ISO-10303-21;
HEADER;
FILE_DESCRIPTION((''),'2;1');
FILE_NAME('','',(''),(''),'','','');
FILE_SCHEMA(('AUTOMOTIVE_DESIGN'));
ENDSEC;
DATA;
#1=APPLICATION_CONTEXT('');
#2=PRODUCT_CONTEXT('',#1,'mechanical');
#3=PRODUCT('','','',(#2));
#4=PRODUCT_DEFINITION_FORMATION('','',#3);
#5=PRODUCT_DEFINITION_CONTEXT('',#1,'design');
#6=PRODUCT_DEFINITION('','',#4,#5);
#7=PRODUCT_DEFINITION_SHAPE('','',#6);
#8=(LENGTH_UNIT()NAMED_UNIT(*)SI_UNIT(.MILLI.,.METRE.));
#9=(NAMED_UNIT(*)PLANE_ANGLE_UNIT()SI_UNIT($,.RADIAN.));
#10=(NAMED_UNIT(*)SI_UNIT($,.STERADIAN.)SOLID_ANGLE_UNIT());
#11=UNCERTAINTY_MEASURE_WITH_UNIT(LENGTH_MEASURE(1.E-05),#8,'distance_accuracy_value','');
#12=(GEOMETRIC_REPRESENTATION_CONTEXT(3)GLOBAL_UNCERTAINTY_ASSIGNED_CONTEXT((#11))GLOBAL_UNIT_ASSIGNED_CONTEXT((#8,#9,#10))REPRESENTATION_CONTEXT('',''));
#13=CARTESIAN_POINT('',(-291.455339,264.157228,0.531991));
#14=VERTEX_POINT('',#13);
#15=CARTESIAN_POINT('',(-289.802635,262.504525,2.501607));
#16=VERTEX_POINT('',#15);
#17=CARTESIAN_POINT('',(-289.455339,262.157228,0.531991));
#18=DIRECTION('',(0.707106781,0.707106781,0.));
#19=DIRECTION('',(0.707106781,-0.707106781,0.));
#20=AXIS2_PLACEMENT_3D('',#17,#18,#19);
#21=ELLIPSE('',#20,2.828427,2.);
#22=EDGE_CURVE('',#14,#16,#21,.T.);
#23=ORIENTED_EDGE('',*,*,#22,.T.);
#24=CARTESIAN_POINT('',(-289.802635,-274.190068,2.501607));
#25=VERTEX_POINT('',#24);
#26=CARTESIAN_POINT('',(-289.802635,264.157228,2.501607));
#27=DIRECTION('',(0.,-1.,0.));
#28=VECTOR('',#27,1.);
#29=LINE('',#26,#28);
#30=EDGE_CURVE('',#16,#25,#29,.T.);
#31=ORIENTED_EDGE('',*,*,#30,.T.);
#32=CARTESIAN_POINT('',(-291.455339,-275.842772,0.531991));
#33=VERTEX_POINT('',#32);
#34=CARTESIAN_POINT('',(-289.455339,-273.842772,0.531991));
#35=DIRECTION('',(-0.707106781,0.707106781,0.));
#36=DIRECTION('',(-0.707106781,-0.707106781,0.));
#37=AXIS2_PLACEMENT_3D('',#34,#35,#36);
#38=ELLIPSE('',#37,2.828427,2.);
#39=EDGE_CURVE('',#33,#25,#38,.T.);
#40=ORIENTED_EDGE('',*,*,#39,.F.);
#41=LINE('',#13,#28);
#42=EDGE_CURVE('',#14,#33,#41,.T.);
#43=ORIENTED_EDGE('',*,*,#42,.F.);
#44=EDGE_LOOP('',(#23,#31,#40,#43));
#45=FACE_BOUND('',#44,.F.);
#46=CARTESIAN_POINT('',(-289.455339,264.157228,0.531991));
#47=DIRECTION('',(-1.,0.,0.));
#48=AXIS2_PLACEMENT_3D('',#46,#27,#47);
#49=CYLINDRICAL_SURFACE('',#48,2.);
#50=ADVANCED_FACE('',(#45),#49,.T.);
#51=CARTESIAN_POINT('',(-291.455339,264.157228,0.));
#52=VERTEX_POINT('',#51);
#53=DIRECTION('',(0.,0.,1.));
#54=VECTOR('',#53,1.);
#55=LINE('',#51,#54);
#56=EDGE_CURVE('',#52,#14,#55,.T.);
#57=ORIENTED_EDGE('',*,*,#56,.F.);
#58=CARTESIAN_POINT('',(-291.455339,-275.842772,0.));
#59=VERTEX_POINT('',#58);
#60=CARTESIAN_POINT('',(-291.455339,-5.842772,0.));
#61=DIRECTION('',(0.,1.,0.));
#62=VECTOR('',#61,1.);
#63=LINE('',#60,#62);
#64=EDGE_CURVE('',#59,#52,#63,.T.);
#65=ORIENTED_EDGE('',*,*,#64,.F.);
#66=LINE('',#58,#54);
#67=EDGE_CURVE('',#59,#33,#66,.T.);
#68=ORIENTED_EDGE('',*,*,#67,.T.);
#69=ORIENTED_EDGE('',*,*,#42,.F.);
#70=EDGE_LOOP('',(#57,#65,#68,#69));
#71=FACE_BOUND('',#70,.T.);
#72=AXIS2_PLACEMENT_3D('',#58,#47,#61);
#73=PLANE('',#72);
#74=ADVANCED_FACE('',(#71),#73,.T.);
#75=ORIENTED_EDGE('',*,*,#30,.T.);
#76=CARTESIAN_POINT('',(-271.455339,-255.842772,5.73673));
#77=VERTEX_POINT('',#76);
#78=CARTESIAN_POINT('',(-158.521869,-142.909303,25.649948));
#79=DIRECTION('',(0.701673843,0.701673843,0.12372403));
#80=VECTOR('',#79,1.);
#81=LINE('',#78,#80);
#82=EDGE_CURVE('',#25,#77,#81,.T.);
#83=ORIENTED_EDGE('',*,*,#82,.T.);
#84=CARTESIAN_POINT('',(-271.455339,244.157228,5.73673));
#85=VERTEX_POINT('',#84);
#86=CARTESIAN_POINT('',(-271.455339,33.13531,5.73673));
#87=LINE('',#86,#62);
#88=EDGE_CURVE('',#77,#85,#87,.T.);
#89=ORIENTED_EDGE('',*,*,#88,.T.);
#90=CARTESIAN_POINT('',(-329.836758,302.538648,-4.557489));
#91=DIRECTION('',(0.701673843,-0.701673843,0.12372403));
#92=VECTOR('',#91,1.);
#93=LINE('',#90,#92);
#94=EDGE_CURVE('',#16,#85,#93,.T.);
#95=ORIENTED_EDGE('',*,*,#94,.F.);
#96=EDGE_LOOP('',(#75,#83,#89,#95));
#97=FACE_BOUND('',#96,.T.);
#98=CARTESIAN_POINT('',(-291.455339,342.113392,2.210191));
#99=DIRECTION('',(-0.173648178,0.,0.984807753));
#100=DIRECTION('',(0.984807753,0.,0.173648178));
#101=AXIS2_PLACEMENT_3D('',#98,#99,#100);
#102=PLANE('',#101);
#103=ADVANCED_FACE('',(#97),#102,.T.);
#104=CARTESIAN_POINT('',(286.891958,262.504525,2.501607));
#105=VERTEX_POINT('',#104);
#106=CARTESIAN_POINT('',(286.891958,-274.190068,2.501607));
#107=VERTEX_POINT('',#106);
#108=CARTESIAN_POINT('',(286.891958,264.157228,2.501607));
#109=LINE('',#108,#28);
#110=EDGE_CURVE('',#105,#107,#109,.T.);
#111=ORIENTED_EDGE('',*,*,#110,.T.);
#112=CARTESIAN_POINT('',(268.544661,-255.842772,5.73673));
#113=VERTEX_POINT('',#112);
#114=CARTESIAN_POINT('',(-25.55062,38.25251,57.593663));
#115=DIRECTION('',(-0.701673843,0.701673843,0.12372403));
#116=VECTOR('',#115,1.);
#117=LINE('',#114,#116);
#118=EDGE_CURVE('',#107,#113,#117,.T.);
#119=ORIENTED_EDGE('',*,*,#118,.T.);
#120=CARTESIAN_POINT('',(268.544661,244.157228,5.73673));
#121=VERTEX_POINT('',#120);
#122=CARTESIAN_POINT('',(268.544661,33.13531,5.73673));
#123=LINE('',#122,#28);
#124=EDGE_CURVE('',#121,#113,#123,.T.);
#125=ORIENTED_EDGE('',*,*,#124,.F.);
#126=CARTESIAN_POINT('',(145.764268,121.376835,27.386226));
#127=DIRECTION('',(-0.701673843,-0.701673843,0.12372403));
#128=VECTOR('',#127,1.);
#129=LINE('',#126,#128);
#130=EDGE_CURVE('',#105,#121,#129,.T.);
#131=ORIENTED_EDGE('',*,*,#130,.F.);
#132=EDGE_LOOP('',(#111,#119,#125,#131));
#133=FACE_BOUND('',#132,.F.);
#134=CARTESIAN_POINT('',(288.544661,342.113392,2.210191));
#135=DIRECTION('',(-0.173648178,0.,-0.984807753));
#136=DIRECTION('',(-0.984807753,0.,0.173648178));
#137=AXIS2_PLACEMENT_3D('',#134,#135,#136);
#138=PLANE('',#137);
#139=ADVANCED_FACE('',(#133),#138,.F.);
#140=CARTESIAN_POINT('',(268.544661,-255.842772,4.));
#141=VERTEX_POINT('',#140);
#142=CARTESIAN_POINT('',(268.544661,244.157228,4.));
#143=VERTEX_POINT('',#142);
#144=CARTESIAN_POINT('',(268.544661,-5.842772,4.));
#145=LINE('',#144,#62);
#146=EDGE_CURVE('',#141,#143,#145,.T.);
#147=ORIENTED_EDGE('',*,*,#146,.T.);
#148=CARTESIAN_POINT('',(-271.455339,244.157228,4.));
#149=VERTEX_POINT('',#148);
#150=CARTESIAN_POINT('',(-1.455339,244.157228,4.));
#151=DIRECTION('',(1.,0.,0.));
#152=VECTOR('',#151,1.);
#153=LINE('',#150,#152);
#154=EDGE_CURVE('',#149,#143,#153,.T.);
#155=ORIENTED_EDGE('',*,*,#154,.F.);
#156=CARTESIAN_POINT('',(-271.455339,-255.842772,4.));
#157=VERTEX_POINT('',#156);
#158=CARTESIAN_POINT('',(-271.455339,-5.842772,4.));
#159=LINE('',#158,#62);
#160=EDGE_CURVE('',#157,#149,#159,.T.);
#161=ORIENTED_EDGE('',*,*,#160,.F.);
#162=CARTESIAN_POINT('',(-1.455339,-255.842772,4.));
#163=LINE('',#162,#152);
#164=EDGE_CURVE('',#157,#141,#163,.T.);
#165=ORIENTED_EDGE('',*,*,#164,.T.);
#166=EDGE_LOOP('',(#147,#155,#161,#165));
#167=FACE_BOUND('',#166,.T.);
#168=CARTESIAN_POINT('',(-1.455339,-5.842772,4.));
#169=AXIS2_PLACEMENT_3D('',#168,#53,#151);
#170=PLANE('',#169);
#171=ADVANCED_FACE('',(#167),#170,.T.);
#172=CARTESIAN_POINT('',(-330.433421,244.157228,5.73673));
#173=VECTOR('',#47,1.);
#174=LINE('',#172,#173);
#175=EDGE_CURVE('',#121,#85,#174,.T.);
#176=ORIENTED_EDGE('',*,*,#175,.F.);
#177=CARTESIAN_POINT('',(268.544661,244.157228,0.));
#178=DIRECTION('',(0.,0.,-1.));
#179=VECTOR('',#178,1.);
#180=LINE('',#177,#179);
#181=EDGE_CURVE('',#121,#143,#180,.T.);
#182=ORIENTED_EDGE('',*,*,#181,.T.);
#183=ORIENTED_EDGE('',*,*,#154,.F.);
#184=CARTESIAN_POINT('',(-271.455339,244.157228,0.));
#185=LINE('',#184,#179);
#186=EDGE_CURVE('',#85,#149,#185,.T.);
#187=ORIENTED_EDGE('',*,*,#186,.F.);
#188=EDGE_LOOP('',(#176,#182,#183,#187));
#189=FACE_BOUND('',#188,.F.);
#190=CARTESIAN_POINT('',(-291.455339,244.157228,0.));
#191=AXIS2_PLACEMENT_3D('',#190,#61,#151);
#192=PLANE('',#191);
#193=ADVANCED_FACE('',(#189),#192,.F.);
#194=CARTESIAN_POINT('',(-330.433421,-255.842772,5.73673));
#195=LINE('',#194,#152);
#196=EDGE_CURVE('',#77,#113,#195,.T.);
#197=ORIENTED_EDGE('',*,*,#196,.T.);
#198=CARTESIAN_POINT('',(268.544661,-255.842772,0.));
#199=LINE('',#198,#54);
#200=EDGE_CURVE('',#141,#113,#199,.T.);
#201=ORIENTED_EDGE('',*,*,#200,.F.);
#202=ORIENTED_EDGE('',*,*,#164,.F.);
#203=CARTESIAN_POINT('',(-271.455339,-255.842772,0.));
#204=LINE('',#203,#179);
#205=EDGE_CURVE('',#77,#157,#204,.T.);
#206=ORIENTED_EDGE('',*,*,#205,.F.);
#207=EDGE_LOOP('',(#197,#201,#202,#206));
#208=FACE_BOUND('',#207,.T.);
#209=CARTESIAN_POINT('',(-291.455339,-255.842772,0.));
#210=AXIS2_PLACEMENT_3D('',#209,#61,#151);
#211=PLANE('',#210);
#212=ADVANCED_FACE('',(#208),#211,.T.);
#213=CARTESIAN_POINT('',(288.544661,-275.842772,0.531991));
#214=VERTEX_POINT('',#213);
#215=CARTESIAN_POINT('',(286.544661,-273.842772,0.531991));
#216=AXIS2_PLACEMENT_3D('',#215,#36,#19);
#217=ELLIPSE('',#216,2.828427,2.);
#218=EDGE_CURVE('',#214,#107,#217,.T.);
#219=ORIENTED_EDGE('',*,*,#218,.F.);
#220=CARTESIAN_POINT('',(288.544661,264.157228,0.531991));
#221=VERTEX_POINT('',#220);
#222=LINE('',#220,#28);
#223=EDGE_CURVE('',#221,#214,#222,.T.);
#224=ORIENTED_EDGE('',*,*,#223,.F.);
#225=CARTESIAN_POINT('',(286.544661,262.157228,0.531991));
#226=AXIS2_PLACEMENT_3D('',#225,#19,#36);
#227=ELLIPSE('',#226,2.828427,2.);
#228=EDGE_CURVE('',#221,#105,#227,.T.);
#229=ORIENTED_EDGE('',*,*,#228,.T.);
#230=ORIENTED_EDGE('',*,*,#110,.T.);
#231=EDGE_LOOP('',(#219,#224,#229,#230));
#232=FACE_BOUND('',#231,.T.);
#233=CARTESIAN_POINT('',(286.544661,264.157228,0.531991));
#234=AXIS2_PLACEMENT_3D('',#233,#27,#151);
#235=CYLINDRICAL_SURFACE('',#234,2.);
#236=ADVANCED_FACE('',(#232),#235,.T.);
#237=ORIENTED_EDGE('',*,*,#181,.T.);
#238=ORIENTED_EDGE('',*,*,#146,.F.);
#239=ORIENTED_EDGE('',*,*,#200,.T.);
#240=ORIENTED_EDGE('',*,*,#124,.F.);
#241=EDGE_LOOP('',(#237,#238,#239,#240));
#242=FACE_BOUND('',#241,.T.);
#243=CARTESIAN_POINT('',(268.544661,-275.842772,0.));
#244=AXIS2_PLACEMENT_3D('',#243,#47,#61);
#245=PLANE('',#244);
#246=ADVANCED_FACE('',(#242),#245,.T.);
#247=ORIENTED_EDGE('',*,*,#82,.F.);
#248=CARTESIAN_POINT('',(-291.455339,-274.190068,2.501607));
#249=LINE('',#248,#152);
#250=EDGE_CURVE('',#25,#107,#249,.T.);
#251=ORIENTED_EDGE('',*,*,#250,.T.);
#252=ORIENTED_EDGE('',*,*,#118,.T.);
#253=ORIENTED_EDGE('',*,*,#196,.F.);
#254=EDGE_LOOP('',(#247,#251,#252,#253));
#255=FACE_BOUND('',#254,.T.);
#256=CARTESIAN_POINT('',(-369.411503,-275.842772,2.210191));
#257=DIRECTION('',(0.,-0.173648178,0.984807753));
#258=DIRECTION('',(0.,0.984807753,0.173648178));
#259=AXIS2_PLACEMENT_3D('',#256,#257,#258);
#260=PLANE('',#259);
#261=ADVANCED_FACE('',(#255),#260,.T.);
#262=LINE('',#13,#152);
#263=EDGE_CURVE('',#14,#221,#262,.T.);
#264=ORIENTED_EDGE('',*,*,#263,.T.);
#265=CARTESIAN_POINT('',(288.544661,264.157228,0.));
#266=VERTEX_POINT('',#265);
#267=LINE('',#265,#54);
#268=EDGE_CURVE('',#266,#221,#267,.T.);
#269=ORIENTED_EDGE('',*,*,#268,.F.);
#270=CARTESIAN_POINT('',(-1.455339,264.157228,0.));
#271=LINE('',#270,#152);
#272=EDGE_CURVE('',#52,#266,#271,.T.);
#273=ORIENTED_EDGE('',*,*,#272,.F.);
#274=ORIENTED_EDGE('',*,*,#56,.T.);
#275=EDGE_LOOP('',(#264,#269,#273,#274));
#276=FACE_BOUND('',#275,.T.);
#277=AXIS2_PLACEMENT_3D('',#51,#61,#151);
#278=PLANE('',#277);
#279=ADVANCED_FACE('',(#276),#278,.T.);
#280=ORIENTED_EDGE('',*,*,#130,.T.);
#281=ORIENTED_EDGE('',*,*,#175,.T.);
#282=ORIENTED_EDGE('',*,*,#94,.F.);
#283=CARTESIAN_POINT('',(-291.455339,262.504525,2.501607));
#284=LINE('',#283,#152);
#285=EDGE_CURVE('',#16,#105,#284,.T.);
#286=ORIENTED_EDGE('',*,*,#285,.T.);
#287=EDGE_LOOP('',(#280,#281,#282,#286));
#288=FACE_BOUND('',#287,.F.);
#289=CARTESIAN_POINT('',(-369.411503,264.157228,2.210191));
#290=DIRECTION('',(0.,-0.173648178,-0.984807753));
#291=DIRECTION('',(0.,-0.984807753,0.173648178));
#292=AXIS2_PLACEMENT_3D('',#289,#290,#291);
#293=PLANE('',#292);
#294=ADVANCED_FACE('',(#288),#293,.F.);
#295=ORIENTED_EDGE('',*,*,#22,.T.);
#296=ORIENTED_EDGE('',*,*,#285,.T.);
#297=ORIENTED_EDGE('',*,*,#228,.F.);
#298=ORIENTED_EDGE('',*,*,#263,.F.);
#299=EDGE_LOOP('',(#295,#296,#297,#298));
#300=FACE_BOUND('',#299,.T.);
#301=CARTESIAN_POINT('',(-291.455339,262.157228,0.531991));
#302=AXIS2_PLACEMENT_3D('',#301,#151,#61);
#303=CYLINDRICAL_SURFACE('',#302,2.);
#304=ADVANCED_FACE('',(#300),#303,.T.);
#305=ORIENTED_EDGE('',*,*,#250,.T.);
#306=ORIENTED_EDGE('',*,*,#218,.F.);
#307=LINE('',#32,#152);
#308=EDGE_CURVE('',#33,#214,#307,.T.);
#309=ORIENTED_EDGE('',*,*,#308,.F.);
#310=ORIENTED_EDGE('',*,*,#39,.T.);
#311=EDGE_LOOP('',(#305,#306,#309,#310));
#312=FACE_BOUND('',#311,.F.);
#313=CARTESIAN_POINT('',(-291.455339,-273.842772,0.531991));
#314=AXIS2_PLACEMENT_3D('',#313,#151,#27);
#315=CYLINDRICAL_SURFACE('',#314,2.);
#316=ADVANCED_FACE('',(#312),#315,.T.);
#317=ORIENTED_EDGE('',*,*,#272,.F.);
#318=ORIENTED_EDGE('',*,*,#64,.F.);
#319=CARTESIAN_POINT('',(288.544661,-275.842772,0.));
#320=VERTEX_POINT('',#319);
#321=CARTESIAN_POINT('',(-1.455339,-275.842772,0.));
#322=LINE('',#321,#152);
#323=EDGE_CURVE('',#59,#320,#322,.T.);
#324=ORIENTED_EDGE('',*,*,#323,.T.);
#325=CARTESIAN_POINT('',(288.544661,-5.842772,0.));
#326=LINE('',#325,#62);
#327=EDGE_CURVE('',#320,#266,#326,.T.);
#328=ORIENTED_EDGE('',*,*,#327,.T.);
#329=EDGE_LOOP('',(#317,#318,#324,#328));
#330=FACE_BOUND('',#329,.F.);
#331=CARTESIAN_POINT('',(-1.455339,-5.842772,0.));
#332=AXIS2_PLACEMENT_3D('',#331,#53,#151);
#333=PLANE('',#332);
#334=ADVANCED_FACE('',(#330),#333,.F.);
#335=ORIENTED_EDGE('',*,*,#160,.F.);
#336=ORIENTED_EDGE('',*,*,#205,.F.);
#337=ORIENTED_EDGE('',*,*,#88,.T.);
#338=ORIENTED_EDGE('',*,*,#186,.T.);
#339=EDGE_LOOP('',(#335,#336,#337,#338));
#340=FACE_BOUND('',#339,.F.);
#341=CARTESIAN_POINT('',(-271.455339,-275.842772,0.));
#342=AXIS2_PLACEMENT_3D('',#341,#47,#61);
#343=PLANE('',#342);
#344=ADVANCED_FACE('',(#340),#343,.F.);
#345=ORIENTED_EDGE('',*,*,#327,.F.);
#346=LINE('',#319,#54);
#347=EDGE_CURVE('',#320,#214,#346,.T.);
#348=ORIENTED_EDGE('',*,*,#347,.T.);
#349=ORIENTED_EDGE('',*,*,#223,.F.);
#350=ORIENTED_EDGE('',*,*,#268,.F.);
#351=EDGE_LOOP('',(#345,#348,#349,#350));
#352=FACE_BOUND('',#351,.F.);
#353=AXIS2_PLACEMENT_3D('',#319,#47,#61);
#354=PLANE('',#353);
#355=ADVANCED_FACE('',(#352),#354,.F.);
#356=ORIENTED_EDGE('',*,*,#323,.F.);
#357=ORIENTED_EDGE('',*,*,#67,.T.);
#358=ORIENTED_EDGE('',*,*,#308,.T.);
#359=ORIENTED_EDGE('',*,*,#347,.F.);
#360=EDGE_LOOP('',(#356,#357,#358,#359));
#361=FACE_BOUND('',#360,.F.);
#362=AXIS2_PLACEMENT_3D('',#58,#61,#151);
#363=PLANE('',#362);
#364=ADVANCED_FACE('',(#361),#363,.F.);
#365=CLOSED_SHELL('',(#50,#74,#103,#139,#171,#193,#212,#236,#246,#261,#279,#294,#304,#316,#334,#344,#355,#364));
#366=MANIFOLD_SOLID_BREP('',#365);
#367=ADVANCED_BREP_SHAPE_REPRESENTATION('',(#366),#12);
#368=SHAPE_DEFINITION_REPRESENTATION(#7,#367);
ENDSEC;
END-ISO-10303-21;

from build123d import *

# Parameters (mm, degrees)
F0_W        = 580
F0_H        = 540
F1_DEPTH    = 7.5
F2_T        = -20
F3_T1_DEPTH = 695.9123277853
F3_T3_DEPTH = 735.9123277853
F4_R        = 2
F5_W        = 540
F5_H        = 500
F6_DEPTH    = 4


# Not quite as in the source:
# - a fillet or chamfer that OpenCascade refuses, or shapes differently, is made with other operations: its cross-section is extruded or revolved along the edge and cut away or added


with BuildPart() as f1:
    # F0 (on Top) → F1 (new body)
    with BuildSketch(Plane.XY):
        with Locations((-1.4553386718, -5.8427717585)):
            Rectangle(F0_W, F0_H)
    extrude(amount=F1_DEPTH)

    # F2
    f2_openings = [f1.faces().sort_by_distance(p)[0] for p in [
        (-1.455339, -5.842772, 7.5),
        (-1.455339, -5.842772, 0),
    ]]
    offset(amount=F2_T, openings=f2_openings)

    # F3: chamfer of 30 x 5.2898094213 on 4 edges, made by hand

    # F3_s2 → F3_t1 (cut)
    with BuildSketch(Plane.XZ.offset(-342.1133921341)):
        Polygon((-291.4553386718, 2.2101905787), (-261.4553386718, 7.5), (-291.4553386718, 7.5), align=None)
        Polygon((288.5446613282, 2.2101905787), (258.5446613282, 7.5), (288.5446613282, 7.5), align=None)
    extrude(amount=F3_T1_DEPTH, mode=Mode.SUBTRACT)

    # F3_s4 → F3_t3 (cut)
    with BuildSketch(Plane.YZ.offset(-369.4115025644)):
        Polygon((-275.8427717585, 2.2101905787), (-245.8427717585, 7.5), (-275.8427717585, 7.5), align=None)
        Polygon((264.1572282415, 2.2101905787), (234.1572282415, 7.5), (264.1572282415, 7.5), align=None)
    extrude(amount=F3_T3_DEPTH, mode=Mode.SUBTRACT)

    # F4
    f4_edges = [f1.edges().sort_by_distance(p)[0] for p in [
        (-291.455339, -5.842772, 2.210191),
        (-1.455339, -275.842772, 2.210191),
        (288.544661, -5.842772, 2.210191),
        (-1.455339, 264.157228, 2.210191),
    ]]
    fillet(f4_edges, radius=F4_R)

    # F5 (on Top) → F6 (join)
    with BuildSketch(Plane.XY):
        with Locations((-1.4553386718, -5.8427717585)):
            Rectangle(F5_W, F5_H)
    extrude(amount=F6_DEPTH)


solid = f1.part
